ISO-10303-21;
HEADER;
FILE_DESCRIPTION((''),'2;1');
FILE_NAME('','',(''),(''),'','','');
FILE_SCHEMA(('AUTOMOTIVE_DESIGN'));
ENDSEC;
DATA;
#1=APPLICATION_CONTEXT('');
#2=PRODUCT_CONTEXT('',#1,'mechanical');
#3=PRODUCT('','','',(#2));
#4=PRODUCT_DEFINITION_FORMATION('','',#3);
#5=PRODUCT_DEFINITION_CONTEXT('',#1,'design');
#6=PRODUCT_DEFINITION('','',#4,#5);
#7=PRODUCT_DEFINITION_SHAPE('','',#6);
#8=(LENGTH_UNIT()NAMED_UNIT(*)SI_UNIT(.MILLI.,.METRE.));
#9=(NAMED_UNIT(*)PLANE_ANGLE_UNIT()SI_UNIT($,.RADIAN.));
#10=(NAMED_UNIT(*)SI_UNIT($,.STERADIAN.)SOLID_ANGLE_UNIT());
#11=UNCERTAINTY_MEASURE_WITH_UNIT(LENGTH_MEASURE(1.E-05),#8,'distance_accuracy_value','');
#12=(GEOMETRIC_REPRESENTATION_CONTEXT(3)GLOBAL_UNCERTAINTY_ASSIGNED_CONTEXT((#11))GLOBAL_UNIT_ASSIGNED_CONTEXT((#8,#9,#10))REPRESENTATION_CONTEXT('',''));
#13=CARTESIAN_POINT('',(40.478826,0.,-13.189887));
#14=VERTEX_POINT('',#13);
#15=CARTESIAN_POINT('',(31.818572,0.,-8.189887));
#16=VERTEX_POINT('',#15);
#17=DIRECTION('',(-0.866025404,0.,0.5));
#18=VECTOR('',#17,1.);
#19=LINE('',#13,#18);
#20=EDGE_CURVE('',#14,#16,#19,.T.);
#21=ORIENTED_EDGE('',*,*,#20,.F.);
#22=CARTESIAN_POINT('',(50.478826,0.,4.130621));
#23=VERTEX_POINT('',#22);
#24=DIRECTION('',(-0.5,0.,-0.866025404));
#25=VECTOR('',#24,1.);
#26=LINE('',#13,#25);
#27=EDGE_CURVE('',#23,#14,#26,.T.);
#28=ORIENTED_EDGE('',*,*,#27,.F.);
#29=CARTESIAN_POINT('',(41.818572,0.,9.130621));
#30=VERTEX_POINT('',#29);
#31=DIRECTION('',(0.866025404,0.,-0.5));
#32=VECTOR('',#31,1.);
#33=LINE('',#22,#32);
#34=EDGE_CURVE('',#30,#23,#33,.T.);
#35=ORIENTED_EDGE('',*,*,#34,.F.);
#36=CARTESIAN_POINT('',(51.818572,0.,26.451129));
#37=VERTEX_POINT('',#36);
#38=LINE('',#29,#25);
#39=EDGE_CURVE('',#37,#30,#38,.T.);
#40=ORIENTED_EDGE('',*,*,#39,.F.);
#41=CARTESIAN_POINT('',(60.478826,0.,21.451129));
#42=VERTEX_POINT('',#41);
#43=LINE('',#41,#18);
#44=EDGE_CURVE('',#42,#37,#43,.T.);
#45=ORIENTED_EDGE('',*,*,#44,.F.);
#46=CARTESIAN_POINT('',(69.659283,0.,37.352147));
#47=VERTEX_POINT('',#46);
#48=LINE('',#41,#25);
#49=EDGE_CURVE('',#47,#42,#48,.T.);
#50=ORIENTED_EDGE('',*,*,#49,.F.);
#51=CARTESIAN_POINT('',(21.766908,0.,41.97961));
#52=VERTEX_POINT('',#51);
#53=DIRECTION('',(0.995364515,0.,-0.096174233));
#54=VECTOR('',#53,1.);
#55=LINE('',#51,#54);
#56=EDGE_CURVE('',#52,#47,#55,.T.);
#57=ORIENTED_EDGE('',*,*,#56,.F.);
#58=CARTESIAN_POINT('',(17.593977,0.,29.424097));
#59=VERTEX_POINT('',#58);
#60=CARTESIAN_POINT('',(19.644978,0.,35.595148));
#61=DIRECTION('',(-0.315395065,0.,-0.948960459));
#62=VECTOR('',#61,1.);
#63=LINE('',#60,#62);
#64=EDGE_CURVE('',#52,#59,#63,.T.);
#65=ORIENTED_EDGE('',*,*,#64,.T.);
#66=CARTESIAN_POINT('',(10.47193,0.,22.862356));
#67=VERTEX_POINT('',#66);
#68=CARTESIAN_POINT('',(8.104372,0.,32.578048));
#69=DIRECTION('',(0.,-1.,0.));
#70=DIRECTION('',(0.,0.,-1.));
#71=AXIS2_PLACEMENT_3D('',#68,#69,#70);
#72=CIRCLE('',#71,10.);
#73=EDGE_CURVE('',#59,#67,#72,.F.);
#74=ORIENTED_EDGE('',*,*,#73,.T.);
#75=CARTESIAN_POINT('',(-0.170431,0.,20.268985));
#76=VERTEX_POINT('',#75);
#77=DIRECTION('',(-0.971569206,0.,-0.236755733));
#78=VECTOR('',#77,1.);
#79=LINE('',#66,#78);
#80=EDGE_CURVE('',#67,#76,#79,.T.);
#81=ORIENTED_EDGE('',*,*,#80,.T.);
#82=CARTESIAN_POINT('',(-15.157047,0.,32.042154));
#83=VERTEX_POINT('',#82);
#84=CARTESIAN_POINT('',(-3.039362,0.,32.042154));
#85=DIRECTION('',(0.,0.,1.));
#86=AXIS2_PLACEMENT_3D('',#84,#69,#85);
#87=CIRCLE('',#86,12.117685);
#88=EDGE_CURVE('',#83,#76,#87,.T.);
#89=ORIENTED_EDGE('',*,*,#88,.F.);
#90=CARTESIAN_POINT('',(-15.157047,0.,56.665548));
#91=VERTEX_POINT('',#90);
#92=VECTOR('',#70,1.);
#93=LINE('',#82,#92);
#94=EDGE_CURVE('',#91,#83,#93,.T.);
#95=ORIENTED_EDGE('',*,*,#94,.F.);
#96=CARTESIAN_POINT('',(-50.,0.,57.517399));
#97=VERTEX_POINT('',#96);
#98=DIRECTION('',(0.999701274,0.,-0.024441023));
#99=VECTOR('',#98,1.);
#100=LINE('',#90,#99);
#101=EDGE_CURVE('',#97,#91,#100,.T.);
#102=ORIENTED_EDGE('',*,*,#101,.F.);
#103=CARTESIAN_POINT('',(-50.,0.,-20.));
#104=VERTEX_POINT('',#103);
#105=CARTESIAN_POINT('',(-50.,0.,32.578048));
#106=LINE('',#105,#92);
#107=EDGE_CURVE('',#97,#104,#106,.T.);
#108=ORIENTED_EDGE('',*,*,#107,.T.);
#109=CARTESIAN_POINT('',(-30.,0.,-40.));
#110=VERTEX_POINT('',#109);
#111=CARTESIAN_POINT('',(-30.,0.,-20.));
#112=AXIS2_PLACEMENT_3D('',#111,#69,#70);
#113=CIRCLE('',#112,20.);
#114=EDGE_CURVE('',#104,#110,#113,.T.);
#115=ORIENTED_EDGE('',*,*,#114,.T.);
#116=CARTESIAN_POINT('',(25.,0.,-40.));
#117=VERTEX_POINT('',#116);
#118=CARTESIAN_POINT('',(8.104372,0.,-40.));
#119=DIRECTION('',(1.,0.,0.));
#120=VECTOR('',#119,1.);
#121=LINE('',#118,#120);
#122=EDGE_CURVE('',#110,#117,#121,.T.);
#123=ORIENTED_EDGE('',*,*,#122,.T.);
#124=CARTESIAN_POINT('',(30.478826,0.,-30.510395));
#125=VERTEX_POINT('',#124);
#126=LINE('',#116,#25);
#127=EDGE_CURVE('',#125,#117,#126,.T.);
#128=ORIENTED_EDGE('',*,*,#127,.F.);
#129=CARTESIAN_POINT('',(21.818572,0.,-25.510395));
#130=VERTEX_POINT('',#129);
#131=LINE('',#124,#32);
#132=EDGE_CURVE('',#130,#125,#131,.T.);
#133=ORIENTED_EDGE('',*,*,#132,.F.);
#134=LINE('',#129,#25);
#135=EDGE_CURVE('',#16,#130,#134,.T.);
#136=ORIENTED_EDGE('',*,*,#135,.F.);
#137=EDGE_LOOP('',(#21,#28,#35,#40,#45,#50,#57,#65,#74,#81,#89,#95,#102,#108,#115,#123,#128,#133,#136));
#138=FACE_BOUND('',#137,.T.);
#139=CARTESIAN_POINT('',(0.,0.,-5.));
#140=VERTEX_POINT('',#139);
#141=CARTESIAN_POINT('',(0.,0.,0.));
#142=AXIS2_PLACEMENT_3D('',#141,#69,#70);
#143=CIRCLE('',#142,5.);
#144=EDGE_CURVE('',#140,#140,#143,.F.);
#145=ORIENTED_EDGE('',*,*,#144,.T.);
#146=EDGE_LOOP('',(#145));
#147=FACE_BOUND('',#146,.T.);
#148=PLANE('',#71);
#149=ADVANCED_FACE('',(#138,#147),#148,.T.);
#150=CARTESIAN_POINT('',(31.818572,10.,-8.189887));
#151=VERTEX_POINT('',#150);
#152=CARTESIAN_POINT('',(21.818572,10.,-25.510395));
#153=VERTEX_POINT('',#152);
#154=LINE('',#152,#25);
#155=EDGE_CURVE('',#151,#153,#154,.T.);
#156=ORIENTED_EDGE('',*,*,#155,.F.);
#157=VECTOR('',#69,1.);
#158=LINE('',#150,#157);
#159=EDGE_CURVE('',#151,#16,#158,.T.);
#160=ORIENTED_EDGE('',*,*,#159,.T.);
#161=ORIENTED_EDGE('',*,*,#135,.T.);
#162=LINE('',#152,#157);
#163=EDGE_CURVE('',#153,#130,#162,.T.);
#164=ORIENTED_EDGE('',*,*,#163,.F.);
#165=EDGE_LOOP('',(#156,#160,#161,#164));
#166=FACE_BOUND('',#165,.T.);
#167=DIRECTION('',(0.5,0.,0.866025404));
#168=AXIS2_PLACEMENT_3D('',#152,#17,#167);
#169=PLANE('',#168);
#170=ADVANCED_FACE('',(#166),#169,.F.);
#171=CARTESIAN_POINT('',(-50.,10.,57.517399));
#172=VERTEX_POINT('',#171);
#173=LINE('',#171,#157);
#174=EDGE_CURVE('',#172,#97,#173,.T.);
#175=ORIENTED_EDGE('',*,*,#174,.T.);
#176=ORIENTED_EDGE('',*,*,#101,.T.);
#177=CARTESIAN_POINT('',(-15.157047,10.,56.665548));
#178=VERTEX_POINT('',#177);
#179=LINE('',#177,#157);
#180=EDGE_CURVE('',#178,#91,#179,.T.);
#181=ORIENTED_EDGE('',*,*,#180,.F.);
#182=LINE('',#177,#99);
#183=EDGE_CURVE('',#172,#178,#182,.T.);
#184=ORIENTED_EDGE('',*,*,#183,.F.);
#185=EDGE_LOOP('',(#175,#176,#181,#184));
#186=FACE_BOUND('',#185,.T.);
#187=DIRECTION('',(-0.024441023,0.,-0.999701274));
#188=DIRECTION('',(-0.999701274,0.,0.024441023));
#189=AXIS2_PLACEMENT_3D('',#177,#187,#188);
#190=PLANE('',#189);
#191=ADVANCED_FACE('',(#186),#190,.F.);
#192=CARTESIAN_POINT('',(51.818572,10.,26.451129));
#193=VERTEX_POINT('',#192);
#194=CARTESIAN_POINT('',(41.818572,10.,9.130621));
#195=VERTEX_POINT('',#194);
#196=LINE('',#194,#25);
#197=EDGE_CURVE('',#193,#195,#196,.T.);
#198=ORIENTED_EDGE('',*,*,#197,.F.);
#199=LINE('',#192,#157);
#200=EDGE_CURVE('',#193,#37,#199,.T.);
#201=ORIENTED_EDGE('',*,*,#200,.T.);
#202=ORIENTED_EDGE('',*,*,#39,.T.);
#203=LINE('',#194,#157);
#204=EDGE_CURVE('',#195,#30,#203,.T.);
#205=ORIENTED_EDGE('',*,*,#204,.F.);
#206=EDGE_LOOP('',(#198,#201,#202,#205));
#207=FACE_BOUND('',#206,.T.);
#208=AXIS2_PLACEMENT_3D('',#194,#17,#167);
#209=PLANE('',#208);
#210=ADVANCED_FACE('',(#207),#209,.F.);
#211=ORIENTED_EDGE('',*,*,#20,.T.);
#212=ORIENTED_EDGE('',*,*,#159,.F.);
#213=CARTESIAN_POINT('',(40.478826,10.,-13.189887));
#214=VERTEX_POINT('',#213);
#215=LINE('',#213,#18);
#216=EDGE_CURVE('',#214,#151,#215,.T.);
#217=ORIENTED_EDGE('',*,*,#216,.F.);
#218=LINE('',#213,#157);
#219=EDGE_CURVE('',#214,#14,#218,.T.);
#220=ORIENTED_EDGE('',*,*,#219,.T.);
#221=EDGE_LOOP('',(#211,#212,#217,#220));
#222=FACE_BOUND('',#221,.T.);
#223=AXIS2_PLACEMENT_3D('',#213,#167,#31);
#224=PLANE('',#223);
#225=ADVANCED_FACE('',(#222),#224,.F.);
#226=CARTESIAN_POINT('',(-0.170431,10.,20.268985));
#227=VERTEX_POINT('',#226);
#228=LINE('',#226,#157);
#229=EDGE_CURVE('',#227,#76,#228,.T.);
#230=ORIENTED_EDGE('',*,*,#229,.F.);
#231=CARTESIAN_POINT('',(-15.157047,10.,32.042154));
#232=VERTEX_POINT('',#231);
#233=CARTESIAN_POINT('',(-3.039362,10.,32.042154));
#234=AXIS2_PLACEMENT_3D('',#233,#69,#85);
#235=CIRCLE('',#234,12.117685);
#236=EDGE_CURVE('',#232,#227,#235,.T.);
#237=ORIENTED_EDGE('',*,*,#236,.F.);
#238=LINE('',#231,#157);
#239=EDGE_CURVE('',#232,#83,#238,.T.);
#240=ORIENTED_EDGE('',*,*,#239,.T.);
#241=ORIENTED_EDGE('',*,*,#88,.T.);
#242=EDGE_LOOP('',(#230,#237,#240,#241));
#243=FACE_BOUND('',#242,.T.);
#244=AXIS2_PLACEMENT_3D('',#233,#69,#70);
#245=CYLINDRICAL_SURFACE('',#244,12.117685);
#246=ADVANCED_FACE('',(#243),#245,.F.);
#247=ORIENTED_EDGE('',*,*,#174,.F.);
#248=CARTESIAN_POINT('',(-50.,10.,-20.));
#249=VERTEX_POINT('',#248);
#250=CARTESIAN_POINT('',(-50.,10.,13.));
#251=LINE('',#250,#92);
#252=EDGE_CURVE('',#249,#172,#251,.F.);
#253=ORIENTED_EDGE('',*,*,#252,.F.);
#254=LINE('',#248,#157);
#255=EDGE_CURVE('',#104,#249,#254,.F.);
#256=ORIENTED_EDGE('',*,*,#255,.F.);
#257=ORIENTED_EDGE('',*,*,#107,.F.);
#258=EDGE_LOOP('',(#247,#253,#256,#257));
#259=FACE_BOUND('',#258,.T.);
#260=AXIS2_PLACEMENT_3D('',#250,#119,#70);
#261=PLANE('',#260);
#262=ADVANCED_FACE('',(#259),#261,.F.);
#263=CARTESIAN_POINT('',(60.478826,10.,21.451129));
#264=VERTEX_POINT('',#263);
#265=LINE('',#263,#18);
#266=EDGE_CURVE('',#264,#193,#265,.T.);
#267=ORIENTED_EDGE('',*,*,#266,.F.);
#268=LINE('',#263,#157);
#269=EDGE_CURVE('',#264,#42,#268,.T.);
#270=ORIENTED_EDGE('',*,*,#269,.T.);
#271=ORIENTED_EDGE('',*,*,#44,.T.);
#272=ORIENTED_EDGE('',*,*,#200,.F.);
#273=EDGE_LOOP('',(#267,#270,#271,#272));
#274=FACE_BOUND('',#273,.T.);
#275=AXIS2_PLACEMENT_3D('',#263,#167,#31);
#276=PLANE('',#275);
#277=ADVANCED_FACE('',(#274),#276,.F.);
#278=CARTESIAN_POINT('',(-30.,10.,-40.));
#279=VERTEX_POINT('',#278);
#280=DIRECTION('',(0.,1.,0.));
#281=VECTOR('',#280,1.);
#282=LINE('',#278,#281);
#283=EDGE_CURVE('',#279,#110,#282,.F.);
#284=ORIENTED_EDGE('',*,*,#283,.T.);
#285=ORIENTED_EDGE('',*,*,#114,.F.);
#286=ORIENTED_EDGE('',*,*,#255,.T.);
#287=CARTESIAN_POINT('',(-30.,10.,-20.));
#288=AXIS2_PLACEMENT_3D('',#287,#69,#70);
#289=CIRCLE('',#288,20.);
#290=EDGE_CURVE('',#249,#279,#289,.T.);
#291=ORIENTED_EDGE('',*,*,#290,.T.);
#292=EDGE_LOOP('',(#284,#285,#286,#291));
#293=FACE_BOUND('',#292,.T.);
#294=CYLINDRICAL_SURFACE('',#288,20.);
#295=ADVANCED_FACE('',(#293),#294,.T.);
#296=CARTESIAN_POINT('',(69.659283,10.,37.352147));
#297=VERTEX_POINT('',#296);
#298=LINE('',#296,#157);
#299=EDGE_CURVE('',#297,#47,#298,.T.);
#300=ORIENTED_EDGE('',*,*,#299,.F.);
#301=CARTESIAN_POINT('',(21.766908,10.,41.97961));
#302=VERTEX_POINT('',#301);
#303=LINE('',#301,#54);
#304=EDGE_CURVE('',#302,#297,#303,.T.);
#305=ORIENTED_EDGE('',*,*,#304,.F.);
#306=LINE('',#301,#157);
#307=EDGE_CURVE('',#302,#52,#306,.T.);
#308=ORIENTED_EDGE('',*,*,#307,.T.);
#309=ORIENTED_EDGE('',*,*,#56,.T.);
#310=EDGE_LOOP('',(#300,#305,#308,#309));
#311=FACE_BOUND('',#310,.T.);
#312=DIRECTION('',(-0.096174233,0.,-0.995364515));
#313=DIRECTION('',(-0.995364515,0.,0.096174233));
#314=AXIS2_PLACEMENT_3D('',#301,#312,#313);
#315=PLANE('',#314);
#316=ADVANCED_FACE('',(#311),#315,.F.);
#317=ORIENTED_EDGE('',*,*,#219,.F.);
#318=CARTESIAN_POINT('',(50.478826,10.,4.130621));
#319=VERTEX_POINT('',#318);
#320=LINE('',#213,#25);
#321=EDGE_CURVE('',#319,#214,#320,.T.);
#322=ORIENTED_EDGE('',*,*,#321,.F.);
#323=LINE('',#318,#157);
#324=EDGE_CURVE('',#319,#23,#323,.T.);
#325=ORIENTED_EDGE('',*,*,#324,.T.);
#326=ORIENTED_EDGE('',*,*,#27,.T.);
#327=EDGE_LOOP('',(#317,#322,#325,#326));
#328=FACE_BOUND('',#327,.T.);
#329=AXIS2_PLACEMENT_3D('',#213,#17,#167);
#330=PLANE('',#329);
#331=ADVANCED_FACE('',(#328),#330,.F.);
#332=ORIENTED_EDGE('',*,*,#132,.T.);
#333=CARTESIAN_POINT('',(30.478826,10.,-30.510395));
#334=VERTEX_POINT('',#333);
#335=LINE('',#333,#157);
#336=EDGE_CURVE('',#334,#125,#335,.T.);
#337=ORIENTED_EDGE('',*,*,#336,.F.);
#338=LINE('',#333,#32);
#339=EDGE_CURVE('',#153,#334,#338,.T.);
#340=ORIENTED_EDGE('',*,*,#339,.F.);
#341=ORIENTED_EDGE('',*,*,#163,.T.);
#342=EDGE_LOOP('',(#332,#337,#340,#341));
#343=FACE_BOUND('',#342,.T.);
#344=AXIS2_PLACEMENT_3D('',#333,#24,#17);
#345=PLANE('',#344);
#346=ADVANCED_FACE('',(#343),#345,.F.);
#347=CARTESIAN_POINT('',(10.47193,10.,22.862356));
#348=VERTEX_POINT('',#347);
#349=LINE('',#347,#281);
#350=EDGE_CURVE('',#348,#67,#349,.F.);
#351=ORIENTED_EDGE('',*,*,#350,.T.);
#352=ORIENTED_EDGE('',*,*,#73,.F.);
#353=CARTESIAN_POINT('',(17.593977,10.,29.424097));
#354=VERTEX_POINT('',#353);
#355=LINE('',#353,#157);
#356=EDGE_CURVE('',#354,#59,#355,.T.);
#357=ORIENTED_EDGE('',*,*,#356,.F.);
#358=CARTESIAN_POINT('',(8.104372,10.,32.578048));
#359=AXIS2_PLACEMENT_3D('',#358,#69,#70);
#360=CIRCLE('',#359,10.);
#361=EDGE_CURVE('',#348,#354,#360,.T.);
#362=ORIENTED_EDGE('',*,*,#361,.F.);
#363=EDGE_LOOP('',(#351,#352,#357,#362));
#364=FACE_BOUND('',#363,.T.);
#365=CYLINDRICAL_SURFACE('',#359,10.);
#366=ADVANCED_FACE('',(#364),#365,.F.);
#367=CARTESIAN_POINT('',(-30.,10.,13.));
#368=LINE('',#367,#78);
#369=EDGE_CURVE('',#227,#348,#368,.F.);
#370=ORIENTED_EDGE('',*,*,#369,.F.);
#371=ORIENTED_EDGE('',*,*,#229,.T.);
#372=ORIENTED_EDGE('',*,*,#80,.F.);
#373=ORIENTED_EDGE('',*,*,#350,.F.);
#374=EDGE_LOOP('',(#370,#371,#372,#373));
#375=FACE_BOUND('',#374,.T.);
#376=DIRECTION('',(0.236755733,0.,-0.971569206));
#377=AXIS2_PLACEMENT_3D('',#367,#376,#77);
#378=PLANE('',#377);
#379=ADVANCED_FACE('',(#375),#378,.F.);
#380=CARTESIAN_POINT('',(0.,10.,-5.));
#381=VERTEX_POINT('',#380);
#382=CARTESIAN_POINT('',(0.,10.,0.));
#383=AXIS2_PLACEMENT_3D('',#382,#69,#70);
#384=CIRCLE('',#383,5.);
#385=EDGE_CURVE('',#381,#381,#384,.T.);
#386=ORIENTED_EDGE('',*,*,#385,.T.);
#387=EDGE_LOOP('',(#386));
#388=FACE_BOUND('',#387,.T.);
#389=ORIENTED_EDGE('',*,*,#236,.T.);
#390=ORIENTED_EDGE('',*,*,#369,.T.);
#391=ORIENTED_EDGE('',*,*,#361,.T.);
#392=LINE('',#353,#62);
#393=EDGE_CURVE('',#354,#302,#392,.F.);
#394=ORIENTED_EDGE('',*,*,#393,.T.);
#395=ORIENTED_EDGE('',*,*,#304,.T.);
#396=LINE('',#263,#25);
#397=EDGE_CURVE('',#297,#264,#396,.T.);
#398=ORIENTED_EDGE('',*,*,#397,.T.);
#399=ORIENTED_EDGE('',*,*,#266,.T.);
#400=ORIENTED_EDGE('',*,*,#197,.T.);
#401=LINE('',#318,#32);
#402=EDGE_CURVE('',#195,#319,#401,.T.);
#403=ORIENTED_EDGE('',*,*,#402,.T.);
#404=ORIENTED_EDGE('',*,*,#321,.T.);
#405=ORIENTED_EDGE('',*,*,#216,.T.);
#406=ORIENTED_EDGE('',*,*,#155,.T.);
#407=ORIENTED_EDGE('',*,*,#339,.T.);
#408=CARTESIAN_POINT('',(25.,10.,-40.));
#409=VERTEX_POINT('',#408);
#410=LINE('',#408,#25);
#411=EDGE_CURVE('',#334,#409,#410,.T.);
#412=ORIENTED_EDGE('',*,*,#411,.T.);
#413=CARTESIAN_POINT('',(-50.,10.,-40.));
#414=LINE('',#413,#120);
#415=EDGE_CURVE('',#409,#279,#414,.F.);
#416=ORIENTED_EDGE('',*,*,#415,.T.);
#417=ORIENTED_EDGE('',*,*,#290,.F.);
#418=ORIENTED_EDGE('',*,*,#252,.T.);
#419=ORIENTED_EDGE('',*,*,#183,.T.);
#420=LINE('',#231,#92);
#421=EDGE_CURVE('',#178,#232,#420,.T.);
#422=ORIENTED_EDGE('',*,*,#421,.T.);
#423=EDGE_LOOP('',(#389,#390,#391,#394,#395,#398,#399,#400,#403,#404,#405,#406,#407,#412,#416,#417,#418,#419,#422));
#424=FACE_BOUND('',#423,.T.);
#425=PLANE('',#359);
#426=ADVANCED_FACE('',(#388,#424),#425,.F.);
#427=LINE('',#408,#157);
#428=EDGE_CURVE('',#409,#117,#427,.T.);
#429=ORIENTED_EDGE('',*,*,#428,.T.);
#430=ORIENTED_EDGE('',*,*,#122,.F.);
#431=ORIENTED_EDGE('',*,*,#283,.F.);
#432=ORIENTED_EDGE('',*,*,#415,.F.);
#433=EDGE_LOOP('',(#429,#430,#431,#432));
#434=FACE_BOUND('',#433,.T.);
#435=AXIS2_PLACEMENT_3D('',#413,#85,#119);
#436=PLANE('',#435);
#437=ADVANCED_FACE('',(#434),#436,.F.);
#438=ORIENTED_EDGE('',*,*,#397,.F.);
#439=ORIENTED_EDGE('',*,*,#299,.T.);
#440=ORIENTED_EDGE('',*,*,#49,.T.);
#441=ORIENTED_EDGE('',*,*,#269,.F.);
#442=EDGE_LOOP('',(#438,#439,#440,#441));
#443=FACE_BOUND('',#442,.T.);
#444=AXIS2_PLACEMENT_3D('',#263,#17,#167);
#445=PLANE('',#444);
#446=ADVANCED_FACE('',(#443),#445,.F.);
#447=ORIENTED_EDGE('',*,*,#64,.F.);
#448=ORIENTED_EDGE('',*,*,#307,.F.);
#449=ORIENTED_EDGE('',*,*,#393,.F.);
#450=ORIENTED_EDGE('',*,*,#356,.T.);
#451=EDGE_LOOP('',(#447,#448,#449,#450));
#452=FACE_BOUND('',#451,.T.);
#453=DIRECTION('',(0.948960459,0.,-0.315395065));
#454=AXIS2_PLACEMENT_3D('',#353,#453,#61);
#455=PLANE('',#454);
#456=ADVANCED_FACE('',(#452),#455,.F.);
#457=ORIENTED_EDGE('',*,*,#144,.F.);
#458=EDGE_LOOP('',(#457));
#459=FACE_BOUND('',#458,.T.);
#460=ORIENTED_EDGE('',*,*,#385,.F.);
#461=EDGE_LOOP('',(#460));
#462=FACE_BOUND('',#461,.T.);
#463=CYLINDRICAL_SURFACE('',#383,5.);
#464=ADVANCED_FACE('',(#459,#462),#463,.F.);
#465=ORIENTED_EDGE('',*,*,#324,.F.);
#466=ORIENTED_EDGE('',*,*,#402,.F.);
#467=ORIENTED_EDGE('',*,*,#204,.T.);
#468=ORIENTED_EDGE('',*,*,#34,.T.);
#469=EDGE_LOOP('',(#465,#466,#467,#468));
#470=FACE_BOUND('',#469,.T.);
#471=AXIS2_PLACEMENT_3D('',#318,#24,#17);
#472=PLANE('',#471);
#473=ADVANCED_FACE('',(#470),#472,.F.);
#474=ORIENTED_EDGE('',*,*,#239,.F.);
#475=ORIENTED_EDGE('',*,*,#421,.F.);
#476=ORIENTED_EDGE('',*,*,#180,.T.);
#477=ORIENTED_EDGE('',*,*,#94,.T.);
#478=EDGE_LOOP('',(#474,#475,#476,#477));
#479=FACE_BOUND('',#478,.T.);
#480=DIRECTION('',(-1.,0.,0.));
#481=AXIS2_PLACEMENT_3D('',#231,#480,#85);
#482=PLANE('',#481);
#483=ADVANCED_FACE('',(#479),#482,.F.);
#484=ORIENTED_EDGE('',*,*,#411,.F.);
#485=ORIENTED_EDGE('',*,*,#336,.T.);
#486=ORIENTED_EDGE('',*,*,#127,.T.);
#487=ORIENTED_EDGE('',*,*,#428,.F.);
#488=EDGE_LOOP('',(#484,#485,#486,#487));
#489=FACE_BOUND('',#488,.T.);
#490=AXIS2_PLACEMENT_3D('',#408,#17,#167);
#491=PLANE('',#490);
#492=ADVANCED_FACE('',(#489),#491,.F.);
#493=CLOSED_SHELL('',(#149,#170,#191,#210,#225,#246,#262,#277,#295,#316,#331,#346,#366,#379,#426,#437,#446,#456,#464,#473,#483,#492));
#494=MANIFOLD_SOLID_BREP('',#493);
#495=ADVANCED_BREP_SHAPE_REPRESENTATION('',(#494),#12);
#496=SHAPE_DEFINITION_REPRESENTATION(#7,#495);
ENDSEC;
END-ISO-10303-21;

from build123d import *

# Parameters (mm, degrees)
SKETCH1_R           = 5
BOSS_EXTRUDE1_DEPTH = 10


# Read off the part's stored shape, not the designer's step: Imported1
with BuildPart() as part:
    # Sketch1 → Boss-Extrude1 (new body)
    with BuildSketch(Plane(origin=(0, 0, 0), x_dir=(1, 0, 0), z_dir=(0, 1, 0))):
        with BuildLine():
            Line((-30, 40), (25, 40))
            Line((25, 40), (30.478825766, 30.510395408))
            Line((30.478825766, 30.510395408), (21.818571728, 25.510395408))
            Line((21.818571728, 25.510395408), (31.818571728, 8.189887333))
            Line((31.818571728, 8.189887333), (40.478825766, 13.189887333))
            Line((40.478825766, 13.189887333), (50.478825766, -4.130620743))
            Line((50.478825766, -4.130620743), (41.818571728, -9.130620743))
            Line((41.818571728, -9.130620743), (51.818571728, -26.451128819))
            Line((51.818571728, -26.451128819), (60.478825766, -21.451128819))
            Line((60.478825766, -21.451128819), (69.659283069, -37.352147305))
            Line((69.659283069, -37.352147305), (21.766908157, -41.979610283))
            Line((21.766908157, -41.979610283), (19.644977926, -35.595148029))
            Line((19.644977926, -35.595148029), (17.593976856, -29.424097387))
            ThreePointArc((17.593976856, -29.424097387), (14.880225334, -25.223606168), (10.471929596, -22.862355971))
            Line((10.471929596, -22.862355971), (-0.170430849, -20.268984513))
            ThreePointArc((-0.170430849, -20.268984513), (-10.525131482, -22.513169462), (-15.157047212, -32.042154085))
            Line((-15.157047212, -32.042154085), (-15.157047212, -56.665547585))
            Line((-15.157047212, -56.665547585), (-50, -57.51739948))
            Line((-50, -57.51739948), (-50, -33.474160509))
            Line((-50, -33.474160509), (-50, 20))
            ThreePointArc((-50, 20), (-44.142135624, 34.142135624), (-30, 40))
        make_face()
        with Locations(Location((0, 0, 0), (0, 0, 90))):
            Circle(SKETCH1_R, mode=Mode.SUBTRACT)
    extrude(amount=BOSS_EXTRUDE1_DEPTH)


solid = part.part
